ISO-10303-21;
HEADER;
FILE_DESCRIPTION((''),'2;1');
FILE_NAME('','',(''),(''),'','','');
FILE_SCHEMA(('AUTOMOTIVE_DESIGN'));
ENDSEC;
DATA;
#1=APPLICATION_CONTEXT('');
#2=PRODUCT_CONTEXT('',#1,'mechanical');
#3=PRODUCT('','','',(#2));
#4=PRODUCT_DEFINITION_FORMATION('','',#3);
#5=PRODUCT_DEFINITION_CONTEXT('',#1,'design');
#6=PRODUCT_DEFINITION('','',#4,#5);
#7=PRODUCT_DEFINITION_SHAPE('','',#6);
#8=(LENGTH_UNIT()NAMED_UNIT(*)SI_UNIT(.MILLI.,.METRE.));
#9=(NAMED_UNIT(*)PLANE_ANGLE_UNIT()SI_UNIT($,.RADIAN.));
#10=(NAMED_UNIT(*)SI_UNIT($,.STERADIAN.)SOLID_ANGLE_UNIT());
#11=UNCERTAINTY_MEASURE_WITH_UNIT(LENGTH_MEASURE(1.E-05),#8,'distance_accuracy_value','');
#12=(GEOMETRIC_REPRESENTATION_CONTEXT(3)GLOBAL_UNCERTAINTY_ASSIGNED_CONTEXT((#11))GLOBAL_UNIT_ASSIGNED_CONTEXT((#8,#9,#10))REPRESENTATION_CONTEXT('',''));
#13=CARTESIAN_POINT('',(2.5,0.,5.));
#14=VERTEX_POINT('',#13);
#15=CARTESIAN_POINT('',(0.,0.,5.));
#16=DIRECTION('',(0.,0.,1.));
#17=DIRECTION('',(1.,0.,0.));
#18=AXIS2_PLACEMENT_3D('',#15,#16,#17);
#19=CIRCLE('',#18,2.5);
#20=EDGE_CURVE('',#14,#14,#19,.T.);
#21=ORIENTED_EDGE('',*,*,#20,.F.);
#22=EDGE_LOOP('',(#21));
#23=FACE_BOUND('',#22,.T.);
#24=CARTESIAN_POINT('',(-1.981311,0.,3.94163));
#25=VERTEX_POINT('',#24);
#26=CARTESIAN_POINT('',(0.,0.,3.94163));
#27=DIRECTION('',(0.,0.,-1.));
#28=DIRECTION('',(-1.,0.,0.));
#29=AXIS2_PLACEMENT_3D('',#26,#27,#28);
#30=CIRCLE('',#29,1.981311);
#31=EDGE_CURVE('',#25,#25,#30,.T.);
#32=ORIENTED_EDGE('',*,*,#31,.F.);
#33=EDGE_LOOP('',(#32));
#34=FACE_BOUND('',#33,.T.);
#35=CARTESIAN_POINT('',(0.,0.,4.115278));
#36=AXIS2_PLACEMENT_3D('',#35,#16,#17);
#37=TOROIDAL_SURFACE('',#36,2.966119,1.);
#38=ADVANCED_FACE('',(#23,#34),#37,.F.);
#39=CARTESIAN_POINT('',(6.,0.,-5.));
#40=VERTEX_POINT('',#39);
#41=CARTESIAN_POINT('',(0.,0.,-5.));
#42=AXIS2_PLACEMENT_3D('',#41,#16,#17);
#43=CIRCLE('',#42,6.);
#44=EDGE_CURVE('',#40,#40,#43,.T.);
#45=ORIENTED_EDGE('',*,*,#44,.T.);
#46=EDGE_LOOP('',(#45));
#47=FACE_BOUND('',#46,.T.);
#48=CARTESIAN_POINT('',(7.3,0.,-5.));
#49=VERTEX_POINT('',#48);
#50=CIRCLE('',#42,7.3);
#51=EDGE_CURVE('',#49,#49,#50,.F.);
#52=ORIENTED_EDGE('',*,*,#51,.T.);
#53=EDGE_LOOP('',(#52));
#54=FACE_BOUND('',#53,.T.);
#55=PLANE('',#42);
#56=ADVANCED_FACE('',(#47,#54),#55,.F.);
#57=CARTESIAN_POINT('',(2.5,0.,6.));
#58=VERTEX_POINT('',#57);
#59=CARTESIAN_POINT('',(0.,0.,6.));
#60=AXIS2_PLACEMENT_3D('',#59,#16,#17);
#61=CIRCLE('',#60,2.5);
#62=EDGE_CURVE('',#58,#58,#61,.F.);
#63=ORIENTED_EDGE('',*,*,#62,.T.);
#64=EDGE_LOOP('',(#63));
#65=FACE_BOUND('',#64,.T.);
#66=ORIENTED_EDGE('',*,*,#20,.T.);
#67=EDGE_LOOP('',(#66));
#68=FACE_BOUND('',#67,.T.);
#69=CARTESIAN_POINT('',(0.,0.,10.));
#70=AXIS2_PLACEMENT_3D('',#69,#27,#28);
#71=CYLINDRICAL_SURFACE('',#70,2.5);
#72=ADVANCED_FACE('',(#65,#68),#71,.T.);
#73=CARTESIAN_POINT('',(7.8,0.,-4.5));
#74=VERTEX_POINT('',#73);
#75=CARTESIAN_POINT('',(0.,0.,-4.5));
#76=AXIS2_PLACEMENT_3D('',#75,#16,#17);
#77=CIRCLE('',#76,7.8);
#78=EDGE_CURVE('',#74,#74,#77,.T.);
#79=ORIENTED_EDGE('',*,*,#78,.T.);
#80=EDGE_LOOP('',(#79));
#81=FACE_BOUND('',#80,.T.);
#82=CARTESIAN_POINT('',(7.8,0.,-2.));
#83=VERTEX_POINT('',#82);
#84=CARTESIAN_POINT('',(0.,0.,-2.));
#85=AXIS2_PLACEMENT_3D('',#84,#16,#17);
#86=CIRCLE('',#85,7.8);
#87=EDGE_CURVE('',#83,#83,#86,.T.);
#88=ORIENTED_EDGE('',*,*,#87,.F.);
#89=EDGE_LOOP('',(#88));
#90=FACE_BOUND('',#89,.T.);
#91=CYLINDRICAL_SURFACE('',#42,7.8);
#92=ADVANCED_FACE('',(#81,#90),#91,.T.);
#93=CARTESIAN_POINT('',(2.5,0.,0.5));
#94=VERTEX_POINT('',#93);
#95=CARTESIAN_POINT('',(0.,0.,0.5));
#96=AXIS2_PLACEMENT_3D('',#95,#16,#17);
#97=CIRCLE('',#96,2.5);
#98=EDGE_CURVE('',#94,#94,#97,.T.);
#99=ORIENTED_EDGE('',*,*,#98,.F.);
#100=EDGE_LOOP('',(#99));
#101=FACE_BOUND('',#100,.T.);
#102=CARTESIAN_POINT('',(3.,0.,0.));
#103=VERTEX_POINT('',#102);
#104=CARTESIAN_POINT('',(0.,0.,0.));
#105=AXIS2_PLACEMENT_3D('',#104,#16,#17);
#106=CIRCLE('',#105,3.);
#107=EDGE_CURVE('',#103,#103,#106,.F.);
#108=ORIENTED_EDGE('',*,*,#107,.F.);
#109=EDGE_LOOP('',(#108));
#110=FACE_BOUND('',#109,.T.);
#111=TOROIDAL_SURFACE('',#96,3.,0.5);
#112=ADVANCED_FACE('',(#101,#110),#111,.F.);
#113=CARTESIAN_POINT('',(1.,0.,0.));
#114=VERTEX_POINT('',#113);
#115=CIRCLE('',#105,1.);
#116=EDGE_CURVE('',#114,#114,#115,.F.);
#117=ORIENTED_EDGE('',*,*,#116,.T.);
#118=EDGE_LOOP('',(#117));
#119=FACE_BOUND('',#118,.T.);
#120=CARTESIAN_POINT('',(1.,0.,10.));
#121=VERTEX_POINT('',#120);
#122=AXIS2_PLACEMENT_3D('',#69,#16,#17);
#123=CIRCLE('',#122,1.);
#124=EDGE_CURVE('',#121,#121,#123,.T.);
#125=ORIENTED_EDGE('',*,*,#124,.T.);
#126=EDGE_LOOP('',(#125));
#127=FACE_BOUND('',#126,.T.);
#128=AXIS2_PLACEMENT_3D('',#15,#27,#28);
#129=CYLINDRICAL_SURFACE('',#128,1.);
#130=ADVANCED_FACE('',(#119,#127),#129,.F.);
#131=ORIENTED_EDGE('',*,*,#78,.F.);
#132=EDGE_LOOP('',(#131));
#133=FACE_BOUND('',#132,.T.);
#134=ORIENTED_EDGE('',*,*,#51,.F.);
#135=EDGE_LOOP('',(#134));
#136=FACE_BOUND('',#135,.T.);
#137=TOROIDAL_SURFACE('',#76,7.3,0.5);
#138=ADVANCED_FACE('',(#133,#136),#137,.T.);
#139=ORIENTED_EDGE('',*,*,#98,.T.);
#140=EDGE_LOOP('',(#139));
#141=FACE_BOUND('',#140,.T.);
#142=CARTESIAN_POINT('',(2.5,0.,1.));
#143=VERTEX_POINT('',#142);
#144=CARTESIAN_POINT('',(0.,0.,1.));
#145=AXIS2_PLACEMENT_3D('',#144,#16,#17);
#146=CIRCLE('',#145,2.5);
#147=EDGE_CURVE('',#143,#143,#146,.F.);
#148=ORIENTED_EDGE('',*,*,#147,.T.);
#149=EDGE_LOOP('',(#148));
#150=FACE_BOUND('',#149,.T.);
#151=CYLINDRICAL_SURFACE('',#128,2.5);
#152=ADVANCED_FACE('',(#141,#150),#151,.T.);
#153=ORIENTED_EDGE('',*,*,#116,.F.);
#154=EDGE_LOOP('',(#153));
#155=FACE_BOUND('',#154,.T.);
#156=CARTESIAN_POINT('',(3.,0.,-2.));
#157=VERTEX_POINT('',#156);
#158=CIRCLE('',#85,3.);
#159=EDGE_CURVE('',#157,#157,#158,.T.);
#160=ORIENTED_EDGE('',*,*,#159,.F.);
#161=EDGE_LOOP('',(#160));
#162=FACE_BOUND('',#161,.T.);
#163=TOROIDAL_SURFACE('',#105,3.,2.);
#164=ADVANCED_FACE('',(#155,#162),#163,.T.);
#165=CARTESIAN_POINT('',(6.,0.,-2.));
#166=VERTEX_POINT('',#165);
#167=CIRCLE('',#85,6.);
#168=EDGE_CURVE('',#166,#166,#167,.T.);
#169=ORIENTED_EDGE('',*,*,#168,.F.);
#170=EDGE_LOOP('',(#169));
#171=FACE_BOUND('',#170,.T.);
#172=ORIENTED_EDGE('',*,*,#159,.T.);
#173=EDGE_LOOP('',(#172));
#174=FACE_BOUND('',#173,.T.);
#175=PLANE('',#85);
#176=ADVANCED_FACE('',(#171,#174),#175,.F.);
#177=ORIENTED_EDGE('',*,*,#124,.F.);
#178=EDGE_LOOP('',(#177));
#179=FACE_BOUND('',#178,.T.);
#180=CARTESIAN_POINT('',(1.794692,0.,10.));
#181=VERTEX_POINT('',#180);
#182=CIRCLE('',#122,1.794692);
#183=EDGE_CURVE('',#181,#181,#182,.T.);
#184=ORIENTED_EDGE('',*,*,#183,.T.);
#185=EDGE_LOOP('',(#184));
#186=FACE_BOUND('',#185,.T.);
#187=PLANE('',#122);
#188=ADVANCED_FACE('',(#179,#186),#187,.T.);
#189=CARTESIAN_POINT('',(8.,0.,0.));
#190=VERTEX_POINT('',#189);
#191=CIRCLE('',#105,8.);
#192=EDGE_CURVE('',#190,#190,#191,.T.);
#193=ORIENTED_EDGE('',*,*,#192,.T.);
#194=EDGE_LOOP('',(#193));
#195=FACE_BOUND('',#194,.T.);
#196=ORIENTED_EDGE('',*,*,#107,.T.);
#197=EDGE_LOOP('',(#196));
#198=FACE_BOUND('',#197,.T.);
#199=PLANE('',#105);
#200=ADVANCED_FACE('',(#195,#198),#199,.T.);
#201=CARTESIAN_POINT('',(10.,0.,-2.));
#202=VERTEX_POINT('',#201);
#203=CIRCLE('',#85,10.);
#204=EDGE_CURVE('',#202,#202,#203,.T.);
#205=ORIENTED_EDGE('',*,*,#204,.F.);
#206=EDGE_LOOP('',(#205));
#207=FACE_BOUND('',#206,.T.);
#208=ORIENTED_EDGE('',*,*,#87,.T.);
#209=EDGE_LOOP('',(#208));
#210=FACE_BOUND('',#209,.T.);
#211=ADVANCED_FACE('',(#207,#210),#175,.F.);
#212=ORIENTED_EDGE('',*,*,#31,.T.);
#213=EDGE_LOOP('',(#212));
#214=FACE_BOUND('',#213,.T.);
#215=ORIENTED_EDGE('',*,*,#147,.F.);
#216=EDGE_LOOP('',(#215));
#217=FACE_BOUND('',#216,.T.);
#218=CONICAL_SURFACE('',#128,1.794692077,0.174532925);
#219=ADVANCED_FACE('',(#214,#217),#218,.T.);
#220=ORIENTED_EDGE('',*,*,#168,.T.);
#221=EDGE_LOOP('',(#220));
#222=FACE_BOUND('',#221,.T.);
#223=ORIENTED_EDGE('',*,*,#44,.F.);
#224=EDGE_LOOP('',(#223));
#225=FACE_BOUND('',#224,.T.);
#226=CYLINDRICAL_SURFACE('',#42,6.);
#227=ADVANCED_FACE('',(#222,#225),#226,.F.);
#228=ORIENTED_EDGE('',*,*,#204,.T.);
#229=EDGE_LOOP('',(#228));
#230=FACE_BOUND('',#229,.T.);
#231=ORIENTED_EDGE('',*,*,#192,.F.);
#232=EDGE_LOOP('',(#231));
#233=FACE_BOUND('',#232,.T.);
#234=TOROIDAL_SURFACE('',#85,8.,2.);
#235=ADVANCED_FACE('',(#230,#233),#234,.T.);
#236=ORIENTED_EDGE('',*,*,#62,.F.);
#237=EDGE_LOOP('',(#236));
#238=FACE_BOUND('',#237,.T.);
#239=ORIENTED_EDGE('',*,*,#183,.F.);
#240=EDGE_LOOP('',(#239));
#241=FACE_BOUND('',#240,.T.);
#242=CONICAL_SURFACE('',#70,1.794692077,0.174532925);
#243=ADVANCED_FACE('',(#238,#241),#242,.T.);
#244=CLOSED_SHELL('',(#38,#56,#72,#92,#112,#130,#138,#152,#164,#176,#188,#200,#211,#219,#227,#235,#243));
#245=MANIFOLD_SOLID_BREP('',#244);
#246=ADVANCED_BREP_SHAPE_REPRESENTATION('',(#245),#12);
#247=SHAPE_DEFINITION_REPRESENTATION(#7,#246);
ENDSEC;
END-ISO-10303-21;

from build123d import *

# Parameters (mm, degrees)
SKETCH1_R                   = 2.5
SKETCH1_R_2                 = 1
BOSS_EXTRUDE1_DEPTH         = 5
CHAMFER2_SIZE               = 4
CHAMFER2_SIZE2              = 0.705307923
LPATTERN2_COUNT             = 2
LPATTERN2_PITCH             = 5
CHAMFER2_OF_LPATTERN2_SIZE2 = 0.705307923
CHAMFER2_OF_LPATTERN2_SIZE  = 4
FILLET1_R                   = 1
SKETCH2_R                   = 10
BOSS_EXTRUDE2_DEPTH         = 2
CUT_EXTRUDE2_START          = -15
SKETCH4_R                   = 1
CUT_EXTRUDE2_DEPTH          = 15
FILLET3_R                   = 2
SKETCH5_R                   = 7.8
SKETCH5_R_2                 = 6
BOSS_EXTRUDE3_DEPTH         = 5
FILLET4_R                   = 2
FILLET5_R                   = 0.5
FILLET6_R                   = 0.5


# Some blends are built 0.0001 mm under size
with BuildPart() as part:
    # Sketch1 → Boss-Extrude1 (new body)
    with BuildSketch(Plane.XY):
        Circle(SKETCH1_R)
        Circle(SKETCH1_R_2, mode=Mode.SUBTRACT)
    boss_extrude1 = extrude(amount=BOSS_EXTRUDE1_DEPTH)

    # Chamfer2
    chamfer2_edges = [part.edges().sort_by_distance(p)[0] for p in [
        (-2.5, 0, 5),
    ]]
    chamfer2_side = [part.faces().sort_by_distance(p)[0] for p in [
        (-2.5, 0, 2.5),
    ]]
    chamfer(chamfer2_edges, length=CHAMFER2_SIZE, length2=CHAMFER2_SIZE2, reference=chamfer2_side[0])


with BuildPart() as lpattern2_1:
    # LPattern2: Boss-Extrude1 ×2
    with Locations(*[(0, 0, i * LPATTERN2_PITCH) for i in range(1, LPATTERN2_COUNT)]):
        add(boss_extrude1)

    # Chamfer2 of LPattern2
    chamfer2_of_lpattern2_edges = [lpattern2_1.edges().sort_by_distance(p)[0] for p in [
        (-2.5, 0, 10),
    ]]
    chamfer(chamfer2_of_lpattern2_edges, length=CHAMFER2_OF_LPATTERN2_SIZE, length2=CHAMFER2_OF_LPATTERN2_SIZE2)


with BuildPart() as part_1:
    add(part.part)

    # LPattern2 united with what the copies to: union LPattern2_1
    add(lpattern2_1.part)

    # Fillet1
    # the kernel refuses this fillet: 1 mm, written as the material it adds along each edge
    with BuildSketch(Plane(origin=(0, 0, 5), x_dir=(1, 0, 0), z_dir=(0, -1, 0))) as fillet1_piece_1:
        with BuildLine():
            CenterArc((2.96611905, -0.884722008), FILLET1_R, 117.782669079, 72.217330921)
            Line((1.981311297, -1.058370186), (1.961615141, -1.061843149))
            Line((1.961615141, -1.061843149), (1.774995922, -0.003472964))
            Line((1.774995922, -0.003472964), (1.794692077, 0.02))
            ThreePointArc((1.794692077, 0.02), (2.147346039, 0.02), (2.490677619, 0.01769444))
            Line((2.490677619, 0.01769444), (2.5, 0))
        make_face()
    revolve(axis=Axis((0, 0, 5), (0, 0, 1)))

    # Sketch2 → Boss-Extrude2 (add)
    with BuildSketch(Plane.XY):
        Circle(SKETCH2_R)
    extrude(amount=-BOSS_EXTRUDE2_DEPTH)

    # Sketch4 → Cut-Extrude2 (cut)
    with BuildSketch(Plane.XY.offset(CUT_EXTRUDE2_START)):
        Circle(SKETCH4_R)
    extrude(amount=CUT_EXTRUDE2_DEPTH, mode=Mode.SUBTRACT)

    # Fillet3
    fillet3_edges = [part_1.edges().sort_by_distance(p)[0] for p in [
        (-1, 0, -2),
    ]]
    fillet(fillet3_edges, radius=FILLET3_R)

    # Sketch5 → Boss-Extrude3 (add)
    with BuildSketch(Plane.XY):
        Circle(SKETCH5_R)
        Circle(SKETCH5_R_2, mode=Mode.SUBTRACT)
    extrude(amount=-BOSS_EXTRUDE3_DEPTH)

    # Fillet4
    fillet4_edges = [part_1.edges().sort_by_distance(p)[0] for p in [
        (-10, 0, 0),
    ]]
    fillet(fillet4_edges, radius=FILLET4_R - 0.0001)  # a hair under: the kernel refuses the full size

    # Fillet5
    fillet5_edges = [part_1.edges().sort_by_distance(p)[0] for p in [
        (-2.5, 0, 0),
    ]]
    fillet(fillet5_edges, radius=FILLET5_R)

    # Fillet6
    fillet6_edges = [part_1.edges().sort_by_distance(p)[0] for p in [
        (-7.8, 0, -5),
    ]]
    fillet(fillet6_edges, radius=FILLET6_R)


solid = part_1.part
